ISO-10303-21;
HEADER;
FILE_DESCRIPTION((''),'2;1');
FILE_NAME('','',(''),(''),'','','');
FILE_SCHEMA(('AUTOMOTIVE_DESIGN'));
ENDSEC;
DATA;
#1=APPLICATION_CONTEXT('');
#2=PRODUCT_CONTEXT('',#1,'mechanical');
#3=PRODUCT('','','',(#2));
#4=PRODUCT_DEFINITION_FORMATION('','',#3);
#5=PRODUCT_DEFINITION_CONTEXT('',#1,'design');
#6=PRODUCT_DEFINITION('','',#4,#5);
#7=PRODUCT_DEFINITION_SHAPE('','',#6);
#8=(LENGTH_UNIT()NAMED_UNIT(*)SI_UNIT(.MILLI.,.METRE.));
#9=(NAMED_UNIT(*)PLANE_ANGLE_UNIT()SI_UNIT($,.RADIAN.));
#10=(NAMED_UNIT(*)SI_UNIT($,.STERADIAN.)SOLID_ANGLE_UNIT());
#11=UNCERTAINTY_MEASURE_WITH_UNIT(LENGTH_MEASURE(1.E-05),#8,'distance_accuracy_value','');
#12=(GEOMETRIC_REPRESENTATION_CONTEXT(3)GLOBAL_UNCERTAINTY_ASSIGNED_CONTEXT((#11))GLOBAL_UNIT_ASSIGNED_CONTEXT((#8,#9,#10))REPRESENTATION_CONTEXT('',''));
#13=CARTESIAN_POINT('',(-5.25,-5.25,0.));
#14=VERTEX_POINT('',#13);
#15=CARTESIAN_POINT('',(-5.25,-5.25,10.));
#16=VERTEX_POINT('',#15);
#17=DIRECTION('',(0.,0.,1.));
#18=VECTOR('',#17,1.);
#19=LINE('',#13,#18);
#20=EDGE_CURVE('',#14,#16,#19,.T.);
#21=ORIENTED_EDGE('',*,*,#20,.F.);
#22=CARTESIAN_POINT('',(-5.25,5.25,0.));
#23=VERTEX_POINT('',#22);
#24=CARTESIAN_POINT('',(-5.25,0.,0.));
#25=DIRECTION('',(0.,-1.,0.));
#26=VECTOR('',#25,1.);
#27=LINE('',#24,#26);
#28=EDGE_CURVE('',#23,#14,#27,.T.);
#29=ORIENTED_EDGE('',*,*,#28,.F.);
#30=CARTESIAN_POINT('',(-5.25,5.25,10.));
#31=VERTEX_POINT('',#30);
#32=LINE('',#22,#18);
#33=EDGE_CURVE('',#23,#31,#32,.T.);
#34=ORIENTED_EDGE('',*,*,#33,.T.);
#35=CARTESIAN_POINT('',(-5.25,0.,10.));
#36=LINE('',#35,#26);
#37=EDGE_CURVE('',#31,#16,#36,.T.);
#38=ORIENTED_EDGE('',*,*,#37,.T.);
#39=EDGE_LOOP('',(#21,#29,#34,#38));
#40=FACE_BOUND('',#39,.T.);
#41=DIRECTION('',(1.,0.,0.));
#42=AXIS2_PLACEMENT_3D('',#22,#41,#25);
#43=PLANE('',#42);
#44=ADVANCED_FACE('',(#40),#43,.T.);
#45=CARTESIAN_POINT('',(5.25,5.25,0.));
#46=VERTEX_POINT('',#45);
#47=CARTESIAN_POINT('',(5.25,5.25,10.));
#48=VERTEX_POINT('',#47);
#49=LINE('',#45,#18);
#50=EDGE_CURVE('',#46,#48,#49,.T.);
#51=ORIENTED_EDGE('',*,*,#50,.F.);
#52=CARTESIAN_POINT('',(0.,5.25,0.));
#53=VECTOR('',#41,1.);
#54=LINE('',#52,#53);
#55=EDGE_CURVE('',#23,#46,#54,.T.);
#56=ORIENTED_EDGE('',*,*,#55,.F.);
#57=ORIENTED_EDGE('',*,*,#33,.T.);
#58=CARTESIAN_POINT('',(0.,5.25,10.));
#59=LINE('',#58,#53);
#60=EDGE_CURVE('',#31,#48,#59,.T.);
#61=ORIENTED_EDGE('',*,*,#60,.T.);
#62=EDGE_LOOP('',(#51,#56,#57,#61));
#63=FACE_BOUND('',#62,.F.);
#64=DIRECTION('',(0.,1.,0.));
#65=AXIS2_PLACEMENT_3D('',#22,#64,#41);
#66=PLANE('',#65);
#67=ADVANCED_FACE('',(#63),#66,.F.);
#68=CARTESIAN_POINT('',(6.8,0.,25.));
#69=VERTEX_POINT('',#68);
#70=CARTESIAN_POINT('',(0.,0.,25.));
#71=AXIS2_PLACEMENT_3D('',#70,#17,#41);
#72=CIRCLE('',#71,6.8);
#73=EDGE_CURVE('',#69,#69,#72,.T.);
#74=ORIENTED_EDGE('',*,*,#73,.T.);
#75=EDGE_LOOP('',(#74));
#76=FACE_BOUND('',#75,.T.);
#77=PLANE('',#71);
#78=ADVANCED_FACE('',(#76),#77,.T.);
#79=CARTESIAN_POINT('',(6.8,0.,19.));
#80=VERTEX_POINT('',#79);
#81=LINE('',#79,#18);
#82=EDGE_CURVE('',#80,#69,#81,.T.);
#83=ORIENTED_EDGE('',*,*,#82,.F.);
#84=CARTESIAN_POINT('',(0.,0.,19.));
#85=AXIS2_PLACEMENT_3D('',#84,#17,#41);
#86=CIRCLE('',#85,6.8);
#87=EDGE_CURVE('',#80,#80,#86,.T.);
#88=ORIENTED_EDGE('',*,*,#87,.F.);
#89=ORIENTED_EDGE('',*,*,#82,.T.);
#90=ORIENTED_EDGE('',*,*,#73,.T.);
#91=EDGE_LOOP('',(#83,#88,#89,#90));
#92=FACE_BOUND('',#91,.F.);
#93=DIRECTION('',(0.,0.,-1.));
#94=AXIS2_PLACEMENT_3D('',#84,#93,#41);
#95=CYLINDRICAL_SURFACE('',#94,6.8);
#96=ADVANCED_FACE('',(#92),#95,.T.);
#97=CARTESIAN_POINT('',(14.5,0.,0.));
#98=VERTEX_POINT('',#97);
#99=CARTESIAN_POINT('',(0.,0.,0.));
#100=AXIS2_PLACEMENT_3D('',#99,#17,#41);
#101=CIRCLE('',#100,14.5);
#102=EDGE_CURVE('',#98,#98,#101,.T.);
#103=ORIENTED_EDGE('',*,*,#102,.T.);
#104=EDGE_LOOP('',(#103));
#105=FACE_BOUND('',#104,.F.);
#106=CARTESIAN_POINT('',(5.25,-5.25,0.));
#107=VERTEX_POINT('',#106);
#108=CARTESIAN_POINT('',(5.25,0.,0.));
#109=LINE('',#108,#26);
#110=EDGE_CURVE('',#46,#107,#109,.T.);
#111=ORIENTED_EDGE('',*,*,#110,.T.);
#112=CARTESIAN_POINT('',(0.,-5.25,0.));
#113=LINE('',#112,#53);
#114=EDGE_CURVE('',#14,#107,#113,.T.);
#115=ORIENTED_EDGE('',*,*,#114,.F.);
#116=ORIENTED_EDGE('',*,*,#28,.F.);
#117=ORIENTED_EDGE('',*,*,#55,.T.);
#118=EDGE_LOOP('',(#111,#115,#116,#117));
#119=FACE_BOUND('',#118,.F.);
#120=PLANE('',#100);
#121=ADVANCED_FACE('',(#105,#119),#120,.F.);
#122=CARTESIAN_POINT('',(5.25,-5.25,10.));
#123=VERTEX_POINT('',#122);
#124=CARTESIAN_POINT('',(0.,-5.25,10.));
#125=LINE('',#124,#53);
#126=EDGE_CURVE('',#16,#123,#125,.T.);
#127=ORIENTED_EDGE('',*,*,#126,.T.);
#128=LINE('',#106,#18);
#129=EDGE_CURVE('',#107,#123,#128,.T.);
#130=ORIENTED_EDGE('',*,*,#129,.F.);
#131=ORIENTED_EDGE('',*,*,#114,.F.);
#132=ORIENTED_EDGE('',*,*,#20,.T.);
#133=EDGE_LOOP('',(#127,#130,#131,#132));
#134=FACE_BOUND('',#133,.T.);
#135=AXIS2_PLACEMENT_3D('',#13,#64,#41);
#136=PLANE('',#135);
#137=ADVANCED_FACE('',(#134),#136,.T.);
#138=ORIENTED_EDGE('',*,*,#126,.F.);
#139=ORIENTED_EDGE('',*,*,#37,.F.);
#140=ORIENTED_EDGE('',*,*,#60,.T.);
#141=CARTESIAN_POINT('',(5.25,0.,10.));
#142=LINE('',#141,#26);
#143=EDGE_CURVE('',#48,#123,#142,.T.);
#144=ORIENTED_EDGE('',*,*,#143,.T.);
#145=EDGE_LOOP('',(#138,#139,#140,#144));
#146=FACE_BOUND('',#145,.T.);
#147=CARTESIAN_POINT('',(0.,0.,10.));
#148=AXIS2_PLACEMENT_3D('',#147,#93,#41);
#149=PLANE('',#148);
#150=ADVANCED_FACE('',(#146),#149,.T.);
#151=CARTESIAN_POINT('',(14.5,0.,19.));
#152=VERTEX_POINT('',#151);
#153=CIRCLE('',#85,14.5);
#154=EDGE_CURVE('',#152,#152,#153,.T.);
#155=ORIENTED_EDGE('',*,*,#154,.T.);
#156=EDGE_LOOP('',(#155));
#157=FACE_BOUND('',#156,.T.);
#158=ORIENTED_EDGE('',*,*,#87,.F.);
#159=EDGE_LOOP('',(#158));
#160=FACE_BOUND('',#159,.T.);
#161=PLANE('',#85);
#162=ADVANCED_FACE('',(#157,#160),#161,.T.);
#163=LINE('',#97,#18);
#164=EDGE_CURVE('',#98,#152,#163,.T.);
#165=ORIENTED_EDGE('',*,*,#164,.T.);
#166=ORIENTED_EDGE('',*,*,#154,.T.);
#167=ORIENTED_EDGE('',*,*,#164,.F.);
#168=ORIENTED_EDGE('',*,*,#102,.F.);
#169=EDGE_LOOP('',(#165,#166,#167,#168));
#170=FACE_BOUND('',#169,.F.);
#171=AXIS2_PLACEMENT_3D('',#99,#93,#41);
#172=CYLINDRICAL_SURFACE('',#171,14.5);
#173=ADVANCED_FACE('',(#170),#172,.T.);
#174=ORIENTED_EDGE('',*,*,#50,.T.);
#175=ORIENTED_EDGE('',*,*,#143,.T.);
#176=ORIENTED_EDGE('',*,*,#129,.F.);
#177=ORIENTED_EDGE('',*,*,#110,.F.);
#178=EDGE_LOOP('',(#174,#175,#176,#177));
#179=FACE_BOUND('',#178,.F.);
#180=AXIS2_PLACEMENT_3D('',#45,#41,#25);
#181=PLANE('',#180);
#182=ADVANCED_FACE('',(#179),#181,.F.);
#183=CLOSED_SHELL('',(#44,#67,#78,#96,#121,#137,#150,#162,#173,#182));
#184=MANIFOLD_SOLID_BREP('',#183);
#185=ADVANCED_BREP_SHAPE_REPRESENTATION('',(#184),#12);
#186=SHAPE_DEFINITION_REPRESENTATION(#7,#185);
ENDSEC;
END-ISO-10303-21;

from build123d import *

# Parameters (mm, degrees)
F0_R     = 14.5
F1_DEPTH = 19
F2_R     = 6.8
F3_DEPTH = 6
F4_W     = 10.5
F4_H     = 10.5
F5_DEPTH = 10


# Not quite as in the source:
# - a feature of the source that left no trace in its solid (it failed there, or was rolled back) is left out


with BuildPart() as f1:
    # F0 (on Top) → F1 (new body)
    with BuildSketch(Plane.XY):
        Circle(F0_R)
    extrude(amount=F1_DEPTH)

    # F2 (on face) → F3 (join)
    with BuildSketch(Plane.XY.offset(19)):
        Circle(F2_R)
    extrude(amount=F3_DEPTH)

    # F4 (on face) → F5 (cut)
    with BuildSketch(Plane(origin=(0, 0, 0), x_dir=(1, 0, 0), z_dir=(0, 0, -1))):
        Rectangle(F4_W, F4_H)
    extrude(amount=-F5_DEPTH, mode=Mode.SUBTRACT)


solid = f1.part
